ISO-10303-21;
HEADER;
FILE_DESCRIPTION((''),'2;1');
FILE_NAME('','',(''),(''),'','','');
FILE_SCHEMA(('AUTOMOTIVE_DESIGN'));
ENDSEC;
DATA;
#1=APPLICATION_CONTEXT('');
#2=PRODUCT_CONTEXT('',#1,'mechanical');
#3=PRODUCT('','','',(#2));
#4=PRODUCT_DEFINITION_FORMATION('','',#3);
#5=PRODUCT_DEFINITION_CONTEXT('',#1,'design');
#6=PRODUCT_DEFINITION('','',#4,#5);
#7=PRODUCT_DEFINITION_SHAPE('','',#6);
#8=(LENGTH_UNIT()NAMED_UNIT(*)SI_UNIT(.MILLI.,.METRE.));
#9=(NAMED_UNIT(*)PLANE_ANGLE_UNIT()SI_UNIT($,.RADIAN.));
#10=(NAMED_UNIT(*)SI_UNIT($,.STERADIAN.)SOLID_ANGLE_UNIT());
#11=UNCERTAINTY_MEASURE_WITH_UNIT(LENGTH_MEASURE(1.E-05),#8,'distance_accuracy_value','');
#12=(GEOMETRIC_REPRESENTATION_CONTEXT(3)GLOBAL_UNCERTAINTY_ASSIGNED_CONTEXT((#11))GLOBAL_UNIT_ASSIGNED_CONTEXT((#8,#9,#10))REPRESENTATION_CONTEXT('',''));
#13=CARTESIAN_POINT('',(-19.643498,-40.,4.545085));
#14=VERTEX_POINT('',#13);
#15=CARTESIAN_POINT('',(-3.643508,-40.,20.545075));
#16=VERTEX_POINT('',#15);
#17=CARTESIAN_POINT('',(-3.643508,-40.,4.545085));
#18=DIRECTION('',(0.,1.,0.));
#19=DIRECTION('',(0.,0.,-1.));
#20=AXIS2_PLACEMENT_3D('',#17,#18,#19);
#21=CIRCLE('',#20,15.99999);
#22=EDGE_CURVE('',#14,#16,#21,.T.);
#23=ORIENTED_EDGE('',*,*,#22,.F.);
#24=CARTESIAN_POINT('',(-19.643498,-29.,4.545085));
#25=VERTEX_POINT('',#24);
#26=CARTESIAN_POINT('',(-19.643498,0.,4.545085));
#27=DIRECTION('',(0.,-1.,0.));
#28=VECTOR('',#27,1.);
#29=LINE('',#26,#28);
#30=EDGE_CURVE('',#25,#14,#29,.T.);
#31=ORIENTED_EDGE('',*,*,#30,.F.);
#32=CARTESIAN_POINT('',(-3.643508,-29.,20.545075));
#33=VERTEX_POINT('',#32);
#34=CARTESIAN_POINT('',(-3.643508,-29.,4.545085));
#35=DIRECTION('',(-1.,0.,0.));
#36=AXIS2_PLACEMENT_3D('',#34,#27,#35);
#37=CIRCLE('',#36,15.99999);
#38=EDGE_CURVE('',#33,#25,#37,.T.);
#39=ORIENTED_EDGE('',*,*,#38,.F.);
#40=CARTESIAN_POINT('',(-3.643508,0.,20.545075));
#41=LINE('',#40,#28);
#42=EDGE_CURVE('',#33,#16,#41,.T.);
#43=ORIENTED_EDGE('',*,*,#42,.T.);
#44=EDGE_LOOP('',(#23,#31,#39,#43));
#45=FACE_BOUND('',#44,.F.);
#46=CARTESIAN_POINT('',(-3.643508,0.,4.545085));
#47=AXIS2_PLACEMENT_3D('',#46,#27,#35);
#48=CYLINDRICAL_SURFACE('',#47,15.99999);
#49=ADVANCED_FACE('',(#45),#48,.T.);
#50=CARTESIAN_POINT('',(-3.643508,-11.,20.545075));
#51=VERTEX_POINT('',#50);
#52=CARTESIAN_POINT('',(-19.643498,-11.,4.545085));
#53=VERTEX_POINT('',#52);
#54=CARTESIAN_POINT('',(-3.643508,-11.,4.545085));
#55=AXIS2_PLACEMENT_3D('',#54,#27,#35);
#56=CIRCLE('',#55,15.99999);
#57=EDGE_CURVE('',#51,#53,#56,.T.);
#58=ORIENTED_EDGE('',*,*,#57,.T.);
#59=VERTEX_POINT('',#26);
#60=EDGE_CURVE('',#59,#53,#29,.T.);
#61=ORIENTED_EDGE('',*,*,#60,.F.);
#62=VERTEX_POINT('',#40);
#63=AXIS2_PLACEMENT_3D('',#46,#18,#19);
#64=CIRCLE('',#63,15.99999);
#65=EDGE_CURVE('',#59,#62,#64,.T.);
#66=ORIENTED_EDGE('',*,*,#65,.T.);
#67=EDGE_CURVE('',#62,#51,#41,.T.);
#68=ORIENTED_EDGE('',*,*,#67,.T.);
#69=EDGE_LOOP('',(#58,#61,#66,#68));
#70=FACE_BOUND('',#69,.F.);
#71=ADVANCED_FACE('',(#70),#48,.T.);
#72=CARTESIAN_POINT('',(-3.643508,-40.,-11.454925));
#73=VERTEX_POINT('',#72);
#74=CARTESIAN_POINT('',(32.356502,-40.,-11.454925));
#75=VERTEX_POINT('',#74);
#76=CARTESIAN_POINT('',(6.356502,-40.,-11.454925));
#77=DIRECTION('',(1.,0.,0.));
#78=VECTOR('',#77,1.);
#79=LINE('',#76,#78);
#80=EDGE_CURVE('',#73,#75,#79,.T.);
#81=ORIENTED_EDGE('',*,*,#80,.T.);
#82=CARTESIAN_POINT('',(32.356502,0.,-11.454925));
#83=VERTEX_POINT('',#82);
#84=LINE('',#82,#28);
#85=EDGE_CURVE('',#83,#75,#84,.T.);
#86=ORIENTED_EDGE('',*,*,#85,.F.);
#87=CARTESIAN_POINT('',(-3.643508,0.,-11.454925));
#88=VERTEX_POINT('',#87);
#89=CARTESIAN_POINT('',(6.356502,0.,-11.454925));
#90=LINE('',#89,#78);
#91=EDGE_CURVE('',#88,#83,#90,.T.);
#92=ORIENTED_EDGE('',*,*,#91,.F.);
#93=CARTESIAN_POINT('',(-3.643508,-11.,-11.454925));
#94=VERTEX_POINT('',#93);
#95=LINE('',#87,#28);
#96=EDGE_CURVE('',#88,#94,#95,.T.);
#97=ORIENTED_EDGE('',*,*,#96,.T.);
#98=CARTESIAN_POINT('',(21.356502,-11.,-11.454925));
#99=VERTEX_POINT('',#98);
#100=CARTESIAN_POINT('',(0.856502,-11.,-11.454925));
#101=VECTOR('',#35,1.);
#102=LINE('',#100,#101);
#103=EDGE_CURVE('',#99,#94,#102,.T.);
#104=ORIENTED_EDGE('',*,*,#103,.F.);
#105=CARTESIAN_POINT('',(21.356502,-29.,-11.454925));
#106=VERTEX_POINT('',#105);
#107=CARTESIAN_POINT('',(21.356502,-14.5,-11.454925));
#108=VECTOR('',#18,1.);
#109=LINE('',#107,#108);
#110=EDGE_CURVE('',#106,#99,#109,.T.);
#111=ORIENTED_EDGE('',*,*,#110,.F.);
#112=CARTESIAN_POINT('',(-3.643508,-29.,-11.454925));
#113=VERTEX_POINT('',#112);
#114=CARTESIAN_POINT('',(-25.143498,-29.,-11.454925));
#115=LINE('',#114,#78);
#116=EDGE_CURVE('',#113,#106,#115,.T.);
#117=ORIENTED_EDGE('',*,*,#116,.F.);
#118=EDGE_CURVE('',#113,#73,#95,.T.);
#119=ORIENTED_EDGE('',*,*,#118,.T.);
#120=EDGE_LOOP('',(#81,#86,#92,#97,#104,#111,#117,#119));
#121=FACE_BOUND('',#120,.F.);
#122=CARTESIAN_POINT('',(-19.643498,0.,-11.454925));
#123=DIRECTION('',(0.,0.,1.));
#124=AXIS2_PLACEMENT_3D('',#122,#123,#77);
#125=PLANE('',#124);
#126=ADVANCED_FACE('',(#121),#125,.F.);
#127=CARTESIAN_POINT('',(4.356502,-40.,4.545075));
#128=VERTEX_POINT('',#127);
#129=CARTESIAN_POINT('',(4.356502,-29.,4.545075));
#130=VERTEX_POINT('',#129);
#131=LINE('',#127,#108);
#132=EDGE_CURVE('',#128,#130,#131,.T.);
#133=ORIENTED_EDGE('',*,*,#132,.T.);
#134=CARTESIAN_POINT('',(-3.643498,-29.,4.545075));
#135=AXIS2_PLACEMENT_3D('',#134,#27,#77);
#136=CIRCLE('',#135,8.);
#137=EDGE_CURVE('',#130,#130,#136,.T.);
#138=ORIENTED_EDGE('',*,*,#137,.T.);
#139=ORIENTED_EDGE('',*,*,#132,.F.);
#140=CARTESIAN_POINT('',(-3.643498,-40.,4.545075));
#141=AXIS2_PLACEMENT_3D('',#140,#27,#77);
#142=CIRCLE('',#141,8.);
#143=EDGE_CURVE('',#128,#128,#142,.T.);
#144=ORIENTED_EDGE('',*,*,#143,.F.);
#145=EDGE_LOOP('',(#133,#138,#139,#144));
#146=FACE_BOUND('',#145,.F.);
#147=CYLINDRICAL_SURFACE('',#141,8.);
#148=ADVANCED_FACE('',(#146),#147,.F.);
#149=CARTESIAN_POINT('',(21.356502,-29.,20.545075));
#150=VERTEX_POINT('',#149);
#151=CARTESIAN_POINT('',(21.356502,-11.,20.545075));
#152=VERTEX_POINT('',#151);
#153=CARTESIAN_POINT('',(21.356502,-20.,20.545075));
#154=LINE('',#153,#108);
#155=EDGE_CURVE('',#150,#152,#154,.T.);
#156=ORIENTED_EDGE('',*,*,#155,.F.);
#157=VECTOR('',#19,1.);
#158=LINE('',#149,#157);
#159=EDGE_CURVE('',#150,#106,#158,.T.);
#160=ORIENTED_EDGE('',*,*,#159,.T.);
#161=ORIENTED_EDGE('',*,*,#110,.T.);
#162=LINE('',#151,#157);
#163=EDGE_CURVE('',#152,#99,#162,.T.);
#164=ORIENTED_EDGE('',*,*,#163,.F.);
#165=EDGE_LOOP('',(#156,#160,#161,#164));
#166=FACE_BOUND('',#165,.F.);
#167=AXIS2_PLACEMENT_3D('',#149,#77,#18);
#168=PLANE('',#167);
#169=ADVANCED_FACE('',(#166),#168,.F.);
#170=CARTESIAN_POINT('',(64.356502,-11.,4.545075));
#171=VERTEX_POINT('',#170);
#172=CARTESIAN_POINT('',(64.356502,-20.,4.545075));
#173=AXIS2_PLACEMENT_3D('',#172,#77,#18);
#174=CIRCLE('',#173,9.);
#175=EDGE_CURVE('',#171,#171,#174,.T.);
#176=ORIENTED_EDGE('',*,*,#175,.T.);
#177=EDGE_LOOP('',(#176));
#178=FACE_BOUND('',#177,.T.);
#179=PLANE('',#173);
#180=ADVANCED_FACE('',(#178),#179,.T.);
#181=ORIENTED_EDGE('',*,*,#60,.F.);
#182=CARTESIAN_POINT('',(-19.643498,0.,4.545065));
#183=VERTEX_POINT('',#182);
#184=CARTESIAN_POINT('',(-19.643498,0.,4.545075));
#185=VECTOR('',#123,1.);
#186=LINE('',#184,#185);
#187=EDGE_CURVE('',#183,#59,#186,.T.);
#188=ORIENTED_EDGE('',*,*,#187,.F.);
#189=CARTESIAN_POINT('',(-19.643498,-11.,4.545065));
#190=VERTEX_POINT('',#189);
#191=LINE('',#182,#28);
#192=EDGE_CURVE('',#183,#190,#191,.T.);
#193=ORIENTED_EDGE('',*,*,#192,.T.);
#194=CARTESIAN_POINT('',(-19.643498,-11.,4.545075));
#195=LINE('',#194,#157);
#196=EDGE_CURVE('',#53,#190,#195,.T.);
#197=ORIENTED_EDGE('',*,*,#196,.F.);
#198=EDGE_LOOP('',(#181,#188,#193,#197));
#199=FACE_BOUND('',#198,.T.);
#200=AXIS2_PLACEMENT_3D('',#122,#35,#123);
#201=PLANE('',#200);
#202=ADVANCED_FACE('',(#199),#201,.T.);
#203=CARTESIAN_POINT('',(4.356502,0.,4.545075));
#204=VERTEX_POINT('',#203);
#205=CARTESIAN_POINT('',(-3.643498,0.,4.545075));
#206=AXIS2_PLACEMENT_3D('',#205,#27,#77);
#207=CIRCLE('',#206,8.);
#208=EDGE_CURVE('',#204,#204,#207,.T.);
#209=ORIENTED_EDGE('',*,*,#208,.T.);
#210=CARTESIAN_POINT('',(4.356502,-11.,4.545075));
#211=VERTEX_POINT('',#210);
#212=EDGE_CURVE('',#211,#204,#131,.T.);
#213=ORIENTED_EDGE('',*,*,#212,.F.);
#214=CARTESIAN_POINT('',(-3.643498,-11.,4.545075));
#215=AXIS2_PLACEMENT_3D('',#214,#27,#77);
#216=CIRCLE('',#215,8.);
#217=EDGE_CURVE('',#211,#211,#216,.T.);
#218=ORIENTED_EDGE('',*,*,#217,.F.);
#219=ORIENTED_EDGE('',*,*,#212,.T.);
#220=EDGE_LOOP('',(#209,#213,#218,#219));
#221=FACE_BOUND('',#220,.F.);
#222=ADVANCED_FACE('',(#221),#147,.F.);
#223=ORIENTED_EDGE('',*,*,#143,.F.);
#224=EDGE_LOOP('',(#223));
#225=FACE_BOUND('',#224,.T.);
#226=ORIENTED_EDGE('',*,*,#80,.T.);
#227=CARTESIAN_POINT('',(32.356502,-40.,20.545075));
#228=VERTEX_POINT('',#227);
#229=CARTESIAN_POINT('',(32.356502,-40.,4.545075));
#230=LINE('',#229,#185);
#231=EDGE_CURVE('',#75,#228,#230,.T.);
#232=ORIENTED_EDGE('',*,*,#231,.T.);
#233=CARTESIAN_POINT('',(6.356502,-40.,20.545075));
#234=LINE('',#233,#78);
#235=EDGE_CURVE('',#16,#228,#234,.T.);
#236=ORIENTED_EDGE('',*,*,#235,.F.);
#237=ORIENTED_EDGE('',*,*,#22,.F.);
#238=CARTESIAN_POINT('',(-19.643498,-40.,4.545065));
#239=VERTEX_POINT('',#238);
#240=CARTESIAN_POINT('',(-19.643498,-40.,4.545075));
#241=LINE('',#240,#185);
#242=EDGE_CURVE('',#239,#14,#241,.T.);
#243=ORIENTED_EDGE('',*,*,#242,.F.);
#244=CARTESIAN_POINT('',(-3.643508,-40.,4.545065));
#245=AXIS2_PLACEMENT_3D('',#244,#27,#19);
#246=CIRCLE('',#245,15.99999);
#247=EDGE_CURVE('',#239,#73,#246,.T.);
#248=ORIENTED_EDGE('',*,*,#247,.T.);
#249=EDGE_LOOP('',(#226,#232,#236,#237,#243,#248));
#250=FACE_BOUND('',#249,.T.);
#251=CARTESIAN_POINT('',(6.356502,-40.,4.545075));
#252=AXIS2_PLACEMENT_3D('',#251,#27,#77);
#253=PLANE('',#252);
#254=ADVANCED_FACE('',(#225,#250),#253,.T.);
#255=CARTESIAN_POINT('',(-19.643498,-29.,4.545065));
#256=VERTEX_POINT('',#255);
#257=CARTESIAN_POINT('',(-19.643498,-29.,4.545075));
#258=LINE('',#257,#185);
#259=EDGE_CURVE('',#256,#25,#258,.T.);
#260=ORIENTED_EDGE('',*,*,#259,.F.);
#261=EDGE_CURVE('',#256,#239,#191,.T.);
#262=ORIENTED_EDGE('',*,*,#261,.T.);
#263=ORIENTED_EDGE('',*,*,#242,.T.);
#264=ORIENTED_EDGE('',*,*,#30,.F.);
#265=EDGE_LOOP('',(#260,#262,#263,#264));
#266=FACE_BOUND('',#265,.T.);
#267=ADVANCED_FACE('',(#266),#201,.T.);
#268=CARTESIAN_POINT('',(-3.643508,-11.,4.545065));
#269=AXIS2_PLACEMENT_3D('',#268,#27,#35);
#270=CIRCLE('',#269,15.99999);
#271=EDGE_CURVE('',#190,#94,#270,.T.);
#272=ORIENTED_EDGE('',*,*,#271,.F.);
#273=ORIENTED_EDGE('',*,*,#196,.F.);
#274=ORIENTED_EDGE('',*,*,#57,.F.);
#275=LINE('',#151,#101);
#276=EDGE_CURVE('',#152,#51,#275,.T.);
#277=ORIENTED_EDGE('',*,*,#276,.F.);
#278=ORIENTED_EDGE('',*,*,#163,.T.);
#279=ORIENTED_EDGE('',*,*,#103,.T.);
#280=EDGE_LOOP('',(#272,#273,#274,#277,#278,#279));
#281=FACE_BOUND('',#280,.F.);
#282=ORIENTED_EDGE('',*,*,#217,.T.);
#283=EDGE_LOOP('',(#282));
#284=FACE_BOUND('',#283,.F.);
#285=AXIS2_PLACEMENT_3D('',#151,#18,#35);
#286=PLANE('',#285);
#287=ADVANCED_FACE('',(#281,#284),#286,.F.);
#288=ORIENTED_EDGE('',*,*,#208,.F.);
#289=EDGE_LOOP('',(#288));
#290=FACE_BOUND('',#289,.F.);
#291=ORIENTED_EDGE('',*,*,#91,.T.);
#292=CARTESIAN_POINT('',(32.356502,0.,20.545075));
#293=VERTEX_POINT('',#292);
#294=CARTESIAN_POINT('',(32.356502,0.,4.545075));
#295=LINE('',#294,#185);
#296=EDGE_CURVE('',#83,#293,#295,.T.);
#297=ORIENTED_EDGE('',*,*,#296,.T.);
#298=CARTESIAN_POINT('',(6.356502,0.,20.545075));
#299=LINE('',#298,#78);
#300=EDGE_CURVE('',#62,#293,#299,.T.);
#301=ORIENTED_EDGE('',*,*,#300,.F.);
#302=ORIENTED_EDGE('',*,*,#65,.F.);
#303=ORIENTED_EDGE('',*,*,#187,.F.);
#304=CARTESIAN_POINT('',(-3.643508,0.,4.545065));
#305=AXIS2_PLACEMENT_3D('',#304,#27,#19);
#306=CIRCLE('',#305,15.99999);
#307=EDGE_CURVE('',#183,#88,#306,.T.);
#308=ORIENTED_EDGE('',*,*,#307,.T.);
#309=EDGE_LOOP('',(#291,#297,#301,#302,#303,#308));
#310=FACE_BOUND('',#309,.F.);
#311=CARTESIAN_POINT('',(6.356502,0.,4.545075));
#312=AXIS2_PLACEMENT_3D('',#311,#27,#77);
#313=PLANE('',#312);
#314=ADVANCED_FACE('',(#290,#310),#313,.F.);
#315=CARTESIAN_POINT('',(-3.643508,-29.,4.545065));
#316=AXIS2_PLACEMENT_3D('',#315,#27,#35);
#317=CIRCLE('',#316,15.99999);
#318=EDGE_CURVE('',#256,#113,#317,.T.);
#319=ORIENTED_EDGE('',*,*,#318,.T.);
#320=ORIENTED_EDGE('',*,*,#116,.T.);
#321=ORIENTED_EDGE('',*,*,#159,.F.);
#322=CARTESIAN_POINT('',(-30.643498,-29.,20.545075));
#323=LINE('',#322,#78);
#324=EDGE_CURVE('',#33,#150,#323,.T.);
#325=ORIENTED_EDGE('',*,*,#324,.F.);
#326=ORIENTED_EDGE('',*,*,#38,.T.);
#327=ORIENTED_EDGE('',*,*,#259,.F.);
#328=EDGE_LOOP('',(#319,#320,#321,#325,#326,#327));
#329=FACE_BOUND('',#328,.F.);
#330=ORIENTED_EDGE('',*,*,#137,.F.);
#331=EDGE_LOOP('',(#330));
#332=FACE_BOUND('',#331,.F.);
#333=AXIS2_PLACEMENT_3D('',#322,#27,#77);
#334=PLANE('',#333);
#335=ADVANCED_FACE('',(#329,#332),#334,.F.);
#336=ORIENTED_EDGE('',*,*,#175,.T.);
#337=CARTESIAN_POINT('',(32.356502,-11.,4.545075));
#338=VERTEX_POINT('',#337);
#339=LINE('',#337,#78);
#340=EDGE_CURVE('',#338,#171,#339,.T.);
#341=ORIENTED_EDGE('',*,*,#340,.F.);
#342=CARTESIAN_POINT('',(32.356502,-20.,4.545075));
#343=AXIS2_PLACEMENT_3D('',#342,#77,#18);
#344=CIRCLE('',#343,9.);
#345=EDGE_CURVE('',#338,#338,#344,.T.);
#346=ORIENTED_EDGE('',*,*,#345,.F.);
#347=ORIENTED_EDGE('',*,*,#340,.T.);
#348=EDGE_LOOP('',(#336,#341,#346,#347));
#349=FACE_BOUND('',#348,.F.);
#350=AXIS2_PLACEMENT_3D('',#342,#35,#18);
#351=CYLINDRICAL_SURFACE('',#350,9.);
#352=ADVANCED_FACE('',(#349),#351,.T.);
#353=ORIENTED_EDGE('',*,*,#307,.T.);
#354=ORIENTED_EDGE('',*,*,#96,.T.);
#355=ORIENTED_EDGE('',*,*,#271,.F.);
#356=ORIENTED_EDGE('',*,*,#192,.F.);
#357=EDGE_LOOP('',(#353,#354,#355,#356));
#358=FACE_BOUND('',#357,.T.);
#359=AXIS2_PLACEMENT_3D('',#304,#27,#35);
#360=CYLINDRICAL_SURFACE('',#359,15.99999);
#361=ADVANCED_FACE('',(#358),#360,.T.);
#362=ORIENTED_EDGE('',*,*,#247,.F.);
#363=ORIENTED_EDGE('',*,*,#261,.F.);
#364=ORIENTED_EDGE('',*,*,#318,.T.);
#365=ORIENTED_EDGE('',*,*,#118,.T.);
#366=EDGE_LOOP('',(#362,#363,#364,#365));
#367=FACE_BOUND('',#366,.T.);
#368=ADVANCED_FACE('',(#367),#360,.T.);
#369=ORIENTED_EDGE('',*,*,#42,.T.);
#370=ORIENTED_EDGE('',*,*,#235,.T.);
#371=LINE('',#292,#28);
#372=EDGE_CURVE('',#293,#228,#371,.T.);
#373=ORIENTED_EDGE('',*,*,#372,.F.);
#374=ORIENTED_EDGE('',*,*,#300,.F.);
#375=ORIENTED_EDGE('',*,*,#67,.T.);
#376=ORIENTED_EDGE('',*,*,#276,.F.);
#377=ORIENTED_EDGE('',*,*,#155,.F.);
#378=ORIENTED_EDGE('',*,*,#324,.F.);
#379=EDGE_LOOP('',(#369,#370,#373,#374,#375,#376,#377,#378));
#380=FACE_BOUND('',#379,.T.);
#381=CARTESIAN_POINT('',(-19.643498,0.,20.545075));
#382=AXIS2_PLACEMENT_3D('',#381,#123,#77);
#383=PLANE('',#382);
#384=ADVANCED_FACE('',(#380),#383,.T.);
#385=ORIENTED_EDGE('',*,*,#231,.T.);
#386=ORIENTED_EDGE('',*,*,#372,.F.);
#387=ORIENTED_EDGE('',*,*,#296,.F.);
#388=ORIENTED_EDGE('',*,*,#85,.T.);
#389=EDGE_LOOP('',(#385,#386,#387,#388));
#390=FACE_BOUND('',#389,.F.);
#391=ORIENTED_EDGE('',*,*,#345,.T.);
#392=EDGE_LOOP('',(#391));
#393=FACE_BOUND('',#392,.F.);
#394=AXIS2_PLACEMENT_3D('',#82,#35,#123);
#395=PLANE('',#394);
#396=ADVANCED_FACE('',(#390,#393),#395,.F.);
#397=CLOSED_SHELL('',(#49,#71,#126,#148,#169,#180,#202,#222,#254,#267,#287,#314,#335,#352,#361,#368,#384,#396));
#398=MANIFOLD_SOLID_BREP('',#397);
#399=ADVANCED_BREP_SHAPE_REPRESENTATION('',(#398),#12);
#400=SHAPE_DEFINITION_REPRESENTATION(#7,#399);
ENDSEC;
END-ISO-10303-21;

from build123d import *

# Parameters (mm, degrees)
F0_W     = 52
F0_H     = 32
F1_DEPTH = 40
F2_R     = 15.99999
F3_R     = 8
F4_DEPTH = 40.001
F5_W     = 26.99999
F5_H     = 18
F5_W_2   = 25.00001
F6_DEPTH = 32.001
F7_R     = 9
F8_DEPTH = 32


# Not quite as in the source:
# - a fillet or chamfer is up to 0.001 mm smaller than in the source, because OpenCascade refuses the exact size


with BuildPart() as f1:
    # F0 (on Front) → F1 (new body)
    with BuildSketch(Plane.XZ):
        with Locations((6.3565019518, 4.5450745088)):
            Rectangle(F0_W, F0_H)
    extrude(amount=F1_DEPTH)

    # F2 (radius 16 in the source; OpenCascade refuses exactly that, so slightly less here)
    f2_edges = [f1.edges().sort_by_distance(p)[0] for p in [
        (-19.643498, -20, 20.545075),
        (-19.643498, -20, -11.454925),
    ]]
    fillet(f2_edges, radius=F2_R)

    # F3 (on face) → F4 (cut, through all)
    with BuildSketch(Plane.XZ.offset(40)):
        with Locations((-3.6434980482, 4.5450745088)):
            Circle(F3_R)
    extrude(amount=-F4_DEPTH, mode=Mode.SUBTRACT)

    # F5 (on face) → F6 (cut, through all)
    with BuildSketch(Plane.XY.offset(20.5450745088)):
        with Locations((-17.1435030482, -20)):
            Rectangle(F5_W, F5_H)
        with Locations((8.8564969518, -20)):
            Rectangle(F5_W_2, F5_H)
    extrude(amount=-F6_DEPTH, mode=Mode.SUBTRACT)

    # F7 (on face) → F8 (join)
    with BuildSketch(Plane.YZ.offset(32.3565019518)):
        with Locations((-20, 4.5450745088)):
            Circle(F7_R)
    extrude(amount=F8_DEPTH)


solid = f1.part
